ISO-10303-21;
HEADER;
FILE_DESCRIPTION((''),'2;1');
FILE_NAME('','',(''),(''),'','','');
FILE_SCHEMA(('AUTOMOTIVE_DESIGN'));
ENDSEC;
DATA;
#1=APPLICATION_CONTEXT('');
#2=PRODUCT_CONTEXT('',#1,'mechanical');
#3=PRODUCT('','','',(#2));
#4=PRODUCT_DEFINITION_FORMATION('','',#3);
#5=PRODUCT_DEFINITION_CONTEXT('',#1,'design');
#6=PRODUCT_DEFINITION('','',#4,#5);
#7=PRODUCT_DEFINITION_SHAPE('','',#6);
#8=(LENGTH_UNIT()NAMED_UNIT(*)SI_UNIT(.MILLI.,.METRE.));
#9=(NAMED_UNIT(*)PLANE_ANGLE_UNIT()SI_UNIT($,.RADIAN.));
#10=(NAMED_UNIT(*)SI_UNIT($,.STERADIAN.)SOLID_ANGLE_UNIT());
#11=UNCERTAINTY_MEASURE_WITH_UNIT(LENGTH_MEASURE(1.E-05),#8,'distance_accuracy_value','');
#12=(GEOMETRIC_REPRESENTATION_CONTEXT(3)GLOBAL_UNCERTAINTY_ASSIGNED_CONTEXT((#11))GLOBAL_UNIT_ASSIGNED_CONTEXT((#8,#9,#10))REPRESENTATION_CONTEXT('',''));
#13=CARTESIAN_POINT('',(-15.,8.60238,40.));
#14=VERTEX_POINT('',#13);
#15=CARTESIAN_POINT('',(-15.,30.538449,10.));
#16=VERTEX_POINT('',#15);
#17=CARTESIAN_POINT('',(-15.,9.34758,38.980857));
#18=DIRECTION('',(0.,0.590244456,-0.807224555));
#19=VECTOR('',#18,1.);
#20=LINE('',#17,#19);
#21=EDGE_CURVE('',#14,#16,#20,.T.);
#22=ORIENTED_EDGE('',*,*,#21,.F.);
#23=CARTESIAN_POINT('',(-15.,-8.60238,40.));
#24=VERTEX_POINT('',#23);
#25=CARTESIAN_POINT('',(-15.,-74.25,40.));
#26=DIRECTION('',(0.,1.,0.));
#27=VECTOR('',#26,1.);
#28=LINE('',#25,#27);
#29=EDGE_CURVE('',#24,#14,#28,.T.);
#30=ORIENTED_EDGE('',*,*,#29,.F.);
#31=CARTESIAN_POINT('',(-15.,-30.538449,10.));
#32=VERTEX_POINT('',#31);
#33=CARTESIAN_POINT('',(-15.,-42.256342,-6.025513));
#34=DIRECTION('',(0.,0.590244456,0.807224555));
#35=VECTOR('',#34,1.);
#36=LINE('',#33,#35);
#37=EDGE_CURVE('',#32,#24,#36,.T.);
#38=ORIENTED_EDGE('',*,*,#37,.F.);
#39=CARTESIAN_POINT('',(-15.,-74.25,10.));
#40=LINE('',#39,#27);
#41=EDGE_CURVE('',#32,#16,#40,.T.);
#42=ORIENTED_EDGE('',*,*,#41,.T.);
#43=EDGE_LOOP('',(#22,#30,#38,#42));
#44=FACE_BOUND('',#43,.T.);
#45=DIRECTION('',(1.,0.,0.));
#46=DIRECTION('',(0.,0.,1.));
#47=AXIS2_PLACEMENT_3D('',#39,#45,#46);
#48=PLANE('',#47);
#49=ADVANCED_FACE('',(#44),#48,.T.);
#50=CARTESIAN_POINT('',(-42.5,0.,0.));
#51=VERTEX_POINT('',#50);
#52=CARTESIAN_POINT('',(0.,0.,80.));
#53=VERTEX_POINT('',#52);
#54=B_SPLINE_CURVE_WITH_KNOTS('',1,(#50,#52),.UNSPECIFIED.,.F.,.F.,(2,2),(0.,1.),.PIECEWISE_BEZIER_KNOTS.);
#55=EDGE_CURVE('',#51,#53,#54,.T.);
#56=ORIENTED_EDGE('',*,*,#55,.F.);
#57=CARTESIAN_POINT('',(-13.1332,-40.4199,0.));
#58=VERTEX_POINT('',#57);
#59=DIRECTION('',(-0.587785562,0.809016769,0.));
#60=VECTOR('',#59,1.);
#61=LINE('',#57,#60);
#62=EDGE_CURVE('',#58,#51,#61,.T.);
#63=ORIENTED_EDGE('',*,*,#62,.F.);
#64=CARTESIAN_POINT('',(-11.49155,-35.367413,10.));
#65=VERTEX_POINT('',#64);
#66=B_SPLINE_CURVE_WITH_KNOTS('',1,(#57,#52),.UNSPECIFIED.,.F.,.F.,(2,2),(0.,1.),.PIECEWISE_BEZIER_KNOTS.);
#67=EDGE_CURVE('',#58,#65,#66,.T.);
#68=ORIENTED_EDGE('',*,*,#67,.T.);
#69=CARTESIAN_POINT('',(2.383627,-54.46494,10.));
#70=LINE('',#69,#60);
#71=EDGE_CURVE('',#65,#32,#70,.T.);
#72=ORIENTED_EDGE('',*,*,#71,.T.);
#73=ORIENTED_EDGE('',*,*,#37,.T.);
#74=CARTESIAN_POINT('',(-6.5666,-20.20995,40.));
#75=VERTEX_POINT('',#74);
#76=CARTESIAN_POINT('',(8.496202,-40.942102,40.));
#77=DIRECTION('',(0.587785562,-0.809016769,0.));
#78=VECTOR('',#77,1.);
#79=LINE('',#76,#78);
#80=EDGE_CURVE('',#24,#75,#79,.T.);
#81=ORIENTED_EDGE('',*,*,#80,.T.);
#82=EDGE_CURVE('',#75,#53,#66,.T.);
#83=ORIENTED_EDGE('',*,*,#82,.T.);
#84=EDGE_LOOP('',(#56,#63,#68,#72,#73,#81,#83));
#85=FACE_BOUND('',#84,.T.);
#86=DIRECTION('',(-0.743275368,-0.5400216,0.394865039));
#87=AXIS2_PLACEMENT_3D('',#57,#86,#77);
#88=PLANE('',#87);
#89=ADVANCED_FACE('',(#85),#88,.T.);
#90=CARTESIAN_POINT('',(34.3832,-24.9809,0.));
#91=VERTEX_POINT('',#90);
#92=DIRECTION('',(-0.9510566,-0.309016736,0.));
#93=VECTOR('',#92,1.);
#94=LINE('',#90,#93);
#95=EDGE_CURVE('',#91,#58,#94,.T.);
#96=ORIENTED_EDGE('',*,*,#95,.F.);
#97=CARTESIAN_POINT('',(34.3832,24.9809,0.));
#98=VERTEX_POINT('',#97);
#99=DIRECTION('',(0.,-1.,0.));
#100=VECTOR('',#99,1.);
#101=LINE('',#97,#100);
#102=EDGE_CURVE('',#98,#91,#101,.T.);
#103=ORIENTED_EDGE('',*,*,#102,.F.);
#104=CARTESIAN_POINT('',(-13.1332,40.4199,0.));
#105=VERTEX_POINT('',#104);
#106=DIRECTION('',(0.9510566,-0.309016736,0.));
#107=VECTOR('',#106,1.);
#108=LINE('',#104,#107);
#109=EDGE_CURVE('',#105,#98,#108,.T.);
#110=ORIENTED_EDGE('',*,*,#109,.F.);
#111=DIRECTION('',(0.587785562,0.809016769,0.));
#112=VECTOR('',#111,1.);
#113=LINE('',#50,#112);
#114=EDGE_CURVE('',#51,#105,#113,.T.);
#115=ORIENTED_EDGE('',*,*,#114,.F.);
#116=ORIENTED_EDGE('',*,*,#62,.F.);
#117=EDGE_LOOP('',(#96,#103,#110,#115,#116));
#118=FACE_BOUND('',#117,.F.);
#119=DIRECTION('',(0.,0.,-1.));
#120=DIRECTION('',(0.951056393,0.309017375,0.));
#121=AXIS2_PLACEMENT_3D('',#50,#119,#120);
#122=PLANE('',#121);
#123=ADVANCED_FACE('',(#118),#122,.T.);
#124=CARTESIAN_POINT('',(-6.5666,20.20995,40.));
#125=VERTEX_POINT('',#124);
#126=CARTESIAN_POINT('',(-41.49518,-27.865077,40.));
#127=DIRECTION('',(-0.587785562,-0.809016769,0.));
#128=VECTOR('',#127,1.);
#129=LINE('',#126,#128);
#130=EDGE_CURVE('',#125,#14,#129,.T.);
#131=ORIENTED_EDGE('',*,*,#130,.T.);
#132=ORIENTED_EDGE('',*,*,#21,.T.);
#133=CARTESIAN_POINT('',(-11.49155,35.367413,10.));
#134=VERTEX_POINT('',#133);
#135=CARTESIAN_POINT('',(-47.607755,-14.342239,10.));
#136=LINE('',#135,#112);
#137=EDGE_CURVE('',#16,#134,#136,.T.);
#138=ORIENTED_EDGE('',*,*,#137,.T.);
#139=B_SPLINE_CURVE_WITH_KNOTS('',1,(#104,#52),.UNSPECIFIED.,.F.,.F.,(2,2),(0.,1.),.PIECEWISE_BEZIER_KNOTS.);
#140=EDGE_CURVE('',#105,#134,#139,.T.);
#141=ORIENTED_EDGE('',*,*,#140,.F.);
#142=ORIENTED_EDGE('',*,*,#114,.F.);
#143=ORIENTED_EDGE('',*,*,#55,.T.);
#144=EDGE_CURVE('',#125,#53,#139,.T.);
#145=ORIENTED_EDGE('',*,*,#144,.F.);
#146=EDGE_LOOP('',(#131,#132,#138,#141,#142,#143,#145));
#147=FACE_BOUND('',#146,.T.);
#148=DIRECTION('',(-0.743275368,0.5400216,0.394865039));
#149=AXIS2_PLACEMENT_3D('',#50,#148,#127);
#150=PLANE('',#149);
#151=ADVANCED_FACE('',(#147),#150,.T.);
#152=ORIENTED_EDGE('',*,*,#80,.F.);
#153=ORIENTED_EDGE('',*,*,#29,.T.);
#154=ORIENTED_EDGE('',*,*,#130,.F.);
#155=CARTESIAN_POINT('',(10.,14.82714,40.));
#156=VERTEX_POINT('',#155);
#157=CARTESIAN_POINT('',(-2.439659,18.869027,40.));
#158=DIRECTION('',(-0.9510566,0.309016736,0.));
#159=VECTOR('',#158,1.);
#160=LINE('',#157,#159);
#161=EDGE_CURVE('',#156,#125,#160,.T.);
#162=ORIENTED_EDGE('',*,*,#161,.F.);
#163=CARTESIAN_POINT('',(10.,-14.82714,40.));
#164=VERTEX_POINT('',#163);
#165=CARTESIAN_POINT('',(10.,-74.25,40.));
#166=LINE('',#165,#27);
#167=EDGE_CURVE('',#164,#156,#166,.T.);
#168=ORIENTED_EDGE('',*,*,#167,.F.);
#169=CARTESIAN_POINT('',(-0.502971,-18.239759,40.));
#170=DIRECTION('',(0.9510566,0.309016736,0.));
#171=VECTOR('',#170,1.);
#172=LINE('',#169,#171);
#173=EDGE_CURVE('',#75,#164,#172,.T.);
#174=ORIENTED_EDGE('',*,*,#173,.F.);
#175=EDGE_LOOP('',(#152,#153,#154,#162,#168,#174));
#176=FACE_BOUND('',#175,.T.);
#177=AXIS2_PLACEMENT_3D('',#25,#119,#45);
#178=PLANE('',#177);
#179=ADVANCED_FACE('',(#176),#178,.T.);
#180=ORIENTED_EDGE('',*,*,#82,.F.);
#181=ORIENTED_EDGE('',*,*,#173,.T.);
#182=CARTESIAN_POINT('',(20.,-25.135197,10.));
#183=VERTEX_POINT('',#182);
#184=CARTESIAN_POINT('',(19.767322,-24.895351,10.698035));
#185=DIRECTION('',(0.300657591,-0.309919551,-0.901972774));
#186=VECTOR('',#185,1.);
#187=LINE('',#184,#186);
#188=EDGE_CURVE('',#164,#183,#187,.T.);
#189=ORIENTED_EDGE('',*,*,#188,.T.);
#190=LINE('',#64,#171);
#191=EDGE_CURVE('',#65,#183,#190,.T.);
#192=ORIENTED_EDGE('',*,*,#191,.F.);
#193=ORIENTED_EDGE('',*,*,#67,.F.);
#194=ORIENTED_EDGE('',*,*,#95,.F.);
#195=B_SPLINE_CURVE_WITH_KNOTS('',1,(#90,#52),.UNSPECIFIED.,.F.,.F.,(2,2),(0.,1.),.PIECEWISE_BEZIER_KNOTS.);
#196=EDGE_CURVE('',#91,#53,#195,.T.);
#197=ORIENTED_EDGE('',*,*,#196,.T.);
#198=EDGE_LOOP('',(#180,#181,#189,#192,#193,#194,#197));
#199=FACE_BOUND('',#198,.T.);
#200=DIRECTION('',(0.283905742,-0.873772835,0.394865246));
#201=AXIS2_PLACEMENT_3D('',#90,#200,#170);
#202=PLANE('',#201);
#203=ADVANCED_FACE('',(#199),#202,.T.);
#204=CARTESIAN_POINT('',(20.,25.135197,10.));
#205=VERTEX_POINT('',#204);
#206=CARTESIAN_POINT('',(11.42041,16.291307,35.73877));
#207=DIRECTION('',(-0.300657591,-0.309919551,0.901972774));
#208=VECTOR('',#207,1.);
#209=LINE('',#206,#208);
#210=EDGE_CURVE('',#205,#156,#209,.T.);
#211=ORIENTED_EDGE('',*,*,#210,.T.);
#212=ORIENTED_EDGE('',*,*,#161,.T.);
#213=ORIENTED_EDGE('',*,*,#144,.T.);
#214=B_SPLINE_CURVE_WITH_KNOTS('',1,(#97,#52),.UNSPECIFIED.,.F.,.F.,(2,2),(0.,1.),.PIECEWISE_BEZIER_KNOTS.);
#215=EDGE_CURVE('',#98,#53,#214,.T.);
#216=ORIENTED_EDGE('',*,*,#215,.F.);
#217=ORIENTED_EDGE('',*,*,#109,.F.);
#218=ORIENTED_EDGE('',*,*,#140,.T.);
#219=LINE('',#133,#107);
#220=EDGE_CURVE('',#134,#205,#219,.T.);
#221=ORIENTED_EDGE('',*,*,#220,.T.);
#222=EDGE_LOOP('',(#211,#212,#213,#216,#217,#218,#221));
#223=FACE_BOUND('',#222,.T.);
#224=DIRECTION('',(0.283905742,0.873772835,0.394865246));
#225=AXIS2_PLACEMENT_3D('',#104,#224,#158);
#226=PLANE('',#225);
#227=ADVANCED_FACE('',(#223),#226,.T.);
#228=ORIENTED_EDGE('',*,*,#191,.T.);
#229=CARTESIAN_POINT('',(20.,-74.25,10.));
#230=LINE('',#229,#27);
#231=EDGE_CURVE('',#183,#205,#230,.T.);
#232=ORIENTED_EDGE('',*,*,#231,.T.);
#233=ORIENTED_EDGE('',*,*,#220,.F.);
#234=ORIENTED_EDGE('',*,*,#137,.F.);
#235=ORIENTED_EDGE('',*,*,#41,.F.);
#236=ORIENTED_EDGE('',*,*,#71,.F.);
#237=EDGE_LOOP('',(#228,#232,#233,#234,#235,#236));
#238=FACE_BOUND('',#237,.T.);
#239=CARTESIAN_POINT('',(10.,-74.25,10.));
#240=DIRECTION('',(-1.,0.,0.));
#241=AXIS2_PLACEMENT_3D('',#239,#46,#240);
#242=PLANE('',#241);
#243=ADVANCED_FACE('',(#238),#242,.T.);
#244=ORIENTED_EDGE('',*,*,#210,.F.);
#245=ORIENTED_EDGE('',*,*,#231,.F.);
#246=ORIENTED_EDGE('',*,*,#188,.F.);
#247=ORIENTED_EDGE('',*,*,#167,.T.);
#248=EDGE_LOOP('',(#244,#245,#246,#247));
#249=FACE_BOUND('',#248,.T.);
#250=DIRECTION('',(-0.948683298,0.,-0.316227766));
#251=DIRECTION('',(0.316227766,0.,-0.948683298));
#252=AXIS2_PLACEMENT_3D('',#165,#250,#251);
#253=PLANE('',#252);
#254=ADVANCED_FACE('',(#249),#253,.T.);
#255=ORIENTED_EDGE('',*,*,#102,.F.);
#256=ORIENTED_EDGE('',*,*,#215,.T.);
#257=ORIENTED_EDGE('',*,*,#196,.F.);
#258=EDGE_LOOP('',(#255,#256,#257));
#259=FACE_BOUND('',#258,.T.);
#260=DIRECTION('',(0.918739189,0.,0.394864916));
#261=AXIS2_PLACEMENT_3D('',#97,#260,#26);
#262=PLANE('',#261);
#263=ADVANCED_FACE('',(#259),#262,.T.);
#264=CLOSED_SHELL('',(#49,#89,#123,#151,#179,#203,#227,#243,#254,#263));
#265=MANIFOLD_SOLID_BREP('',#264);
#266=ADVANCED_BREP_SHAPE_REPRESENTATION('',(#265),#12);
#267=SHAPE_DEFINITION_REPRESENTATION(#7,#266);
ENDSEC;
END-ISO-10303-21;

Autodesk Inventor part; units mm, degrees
ref_plane "YZ Plane" through (0, 0, 0) normal (1, 0, 0) x (0, 1, 0)
sketch "Эскиз1" plane through (0, 0, 0) normal (0, 0, 1) x (1, 0, 0)
  line L0 (-42.5, 0) -> (-13.1332, 40.4199)
  line L1 (-13.1332, 40.4199) -> (34.3832, 24.9809)
  line L2 (34.3832, 24.9809) -> (34.3832, -24.9809)
  line L3 (34.3832, -24.9809) -> (-13.1332, -40.4199)
  line L4 (-13.1332, -40.4199) -> (-42.5, 0)
  point P0 (0, 0)
  point P1 (0, 0)
ref_plane "РабПлоскость1" through (0, 0, 80) normal (0, 0, 1) x (1, 0, 0)
sketch "Эскиз2" plane through (0, 0, 80) normal (0, 0, 1) x (1, 0, 0)
  point P0 (0, 0)
  point P1 (0, 0)
loft "Лофт1" add profiles "Эскиз1" section 2 point at (0, 0, 80)
ref_plane "РабПлоскость2" through (0, -74.25, 0) normal (0, 1, 0) x (-1, 0, 0)
sketch "Эскиз3" plane through (0, -74.25, 0) normal (0, 1, 0) x (-1, 0, 0)
  line L0 (15, 40) -> (-10, 40)
  line L1 (-10, 10) -> (15, 10)
  line L2 (15, 10) -> (15, 40)
  line L3 (-10, 40) -> (-20, 10)
  line L4 (-20, 10) -> (-10, 10)
  point P0 (0, 0)
  point P1 (0, 80)
  point P2 (42.5, 0)
  point P3 (13.1332, 0)
  point P4 (-34.3832, 0)
  dimension "d7" = 25
  dimension "d8" = 30
  dimension "d9" = 15
  dimension "d10" = 35
  dimension "d11" = 10
extrude "Выдавливание1" cut sketch "Эскиз3" along normal through all
